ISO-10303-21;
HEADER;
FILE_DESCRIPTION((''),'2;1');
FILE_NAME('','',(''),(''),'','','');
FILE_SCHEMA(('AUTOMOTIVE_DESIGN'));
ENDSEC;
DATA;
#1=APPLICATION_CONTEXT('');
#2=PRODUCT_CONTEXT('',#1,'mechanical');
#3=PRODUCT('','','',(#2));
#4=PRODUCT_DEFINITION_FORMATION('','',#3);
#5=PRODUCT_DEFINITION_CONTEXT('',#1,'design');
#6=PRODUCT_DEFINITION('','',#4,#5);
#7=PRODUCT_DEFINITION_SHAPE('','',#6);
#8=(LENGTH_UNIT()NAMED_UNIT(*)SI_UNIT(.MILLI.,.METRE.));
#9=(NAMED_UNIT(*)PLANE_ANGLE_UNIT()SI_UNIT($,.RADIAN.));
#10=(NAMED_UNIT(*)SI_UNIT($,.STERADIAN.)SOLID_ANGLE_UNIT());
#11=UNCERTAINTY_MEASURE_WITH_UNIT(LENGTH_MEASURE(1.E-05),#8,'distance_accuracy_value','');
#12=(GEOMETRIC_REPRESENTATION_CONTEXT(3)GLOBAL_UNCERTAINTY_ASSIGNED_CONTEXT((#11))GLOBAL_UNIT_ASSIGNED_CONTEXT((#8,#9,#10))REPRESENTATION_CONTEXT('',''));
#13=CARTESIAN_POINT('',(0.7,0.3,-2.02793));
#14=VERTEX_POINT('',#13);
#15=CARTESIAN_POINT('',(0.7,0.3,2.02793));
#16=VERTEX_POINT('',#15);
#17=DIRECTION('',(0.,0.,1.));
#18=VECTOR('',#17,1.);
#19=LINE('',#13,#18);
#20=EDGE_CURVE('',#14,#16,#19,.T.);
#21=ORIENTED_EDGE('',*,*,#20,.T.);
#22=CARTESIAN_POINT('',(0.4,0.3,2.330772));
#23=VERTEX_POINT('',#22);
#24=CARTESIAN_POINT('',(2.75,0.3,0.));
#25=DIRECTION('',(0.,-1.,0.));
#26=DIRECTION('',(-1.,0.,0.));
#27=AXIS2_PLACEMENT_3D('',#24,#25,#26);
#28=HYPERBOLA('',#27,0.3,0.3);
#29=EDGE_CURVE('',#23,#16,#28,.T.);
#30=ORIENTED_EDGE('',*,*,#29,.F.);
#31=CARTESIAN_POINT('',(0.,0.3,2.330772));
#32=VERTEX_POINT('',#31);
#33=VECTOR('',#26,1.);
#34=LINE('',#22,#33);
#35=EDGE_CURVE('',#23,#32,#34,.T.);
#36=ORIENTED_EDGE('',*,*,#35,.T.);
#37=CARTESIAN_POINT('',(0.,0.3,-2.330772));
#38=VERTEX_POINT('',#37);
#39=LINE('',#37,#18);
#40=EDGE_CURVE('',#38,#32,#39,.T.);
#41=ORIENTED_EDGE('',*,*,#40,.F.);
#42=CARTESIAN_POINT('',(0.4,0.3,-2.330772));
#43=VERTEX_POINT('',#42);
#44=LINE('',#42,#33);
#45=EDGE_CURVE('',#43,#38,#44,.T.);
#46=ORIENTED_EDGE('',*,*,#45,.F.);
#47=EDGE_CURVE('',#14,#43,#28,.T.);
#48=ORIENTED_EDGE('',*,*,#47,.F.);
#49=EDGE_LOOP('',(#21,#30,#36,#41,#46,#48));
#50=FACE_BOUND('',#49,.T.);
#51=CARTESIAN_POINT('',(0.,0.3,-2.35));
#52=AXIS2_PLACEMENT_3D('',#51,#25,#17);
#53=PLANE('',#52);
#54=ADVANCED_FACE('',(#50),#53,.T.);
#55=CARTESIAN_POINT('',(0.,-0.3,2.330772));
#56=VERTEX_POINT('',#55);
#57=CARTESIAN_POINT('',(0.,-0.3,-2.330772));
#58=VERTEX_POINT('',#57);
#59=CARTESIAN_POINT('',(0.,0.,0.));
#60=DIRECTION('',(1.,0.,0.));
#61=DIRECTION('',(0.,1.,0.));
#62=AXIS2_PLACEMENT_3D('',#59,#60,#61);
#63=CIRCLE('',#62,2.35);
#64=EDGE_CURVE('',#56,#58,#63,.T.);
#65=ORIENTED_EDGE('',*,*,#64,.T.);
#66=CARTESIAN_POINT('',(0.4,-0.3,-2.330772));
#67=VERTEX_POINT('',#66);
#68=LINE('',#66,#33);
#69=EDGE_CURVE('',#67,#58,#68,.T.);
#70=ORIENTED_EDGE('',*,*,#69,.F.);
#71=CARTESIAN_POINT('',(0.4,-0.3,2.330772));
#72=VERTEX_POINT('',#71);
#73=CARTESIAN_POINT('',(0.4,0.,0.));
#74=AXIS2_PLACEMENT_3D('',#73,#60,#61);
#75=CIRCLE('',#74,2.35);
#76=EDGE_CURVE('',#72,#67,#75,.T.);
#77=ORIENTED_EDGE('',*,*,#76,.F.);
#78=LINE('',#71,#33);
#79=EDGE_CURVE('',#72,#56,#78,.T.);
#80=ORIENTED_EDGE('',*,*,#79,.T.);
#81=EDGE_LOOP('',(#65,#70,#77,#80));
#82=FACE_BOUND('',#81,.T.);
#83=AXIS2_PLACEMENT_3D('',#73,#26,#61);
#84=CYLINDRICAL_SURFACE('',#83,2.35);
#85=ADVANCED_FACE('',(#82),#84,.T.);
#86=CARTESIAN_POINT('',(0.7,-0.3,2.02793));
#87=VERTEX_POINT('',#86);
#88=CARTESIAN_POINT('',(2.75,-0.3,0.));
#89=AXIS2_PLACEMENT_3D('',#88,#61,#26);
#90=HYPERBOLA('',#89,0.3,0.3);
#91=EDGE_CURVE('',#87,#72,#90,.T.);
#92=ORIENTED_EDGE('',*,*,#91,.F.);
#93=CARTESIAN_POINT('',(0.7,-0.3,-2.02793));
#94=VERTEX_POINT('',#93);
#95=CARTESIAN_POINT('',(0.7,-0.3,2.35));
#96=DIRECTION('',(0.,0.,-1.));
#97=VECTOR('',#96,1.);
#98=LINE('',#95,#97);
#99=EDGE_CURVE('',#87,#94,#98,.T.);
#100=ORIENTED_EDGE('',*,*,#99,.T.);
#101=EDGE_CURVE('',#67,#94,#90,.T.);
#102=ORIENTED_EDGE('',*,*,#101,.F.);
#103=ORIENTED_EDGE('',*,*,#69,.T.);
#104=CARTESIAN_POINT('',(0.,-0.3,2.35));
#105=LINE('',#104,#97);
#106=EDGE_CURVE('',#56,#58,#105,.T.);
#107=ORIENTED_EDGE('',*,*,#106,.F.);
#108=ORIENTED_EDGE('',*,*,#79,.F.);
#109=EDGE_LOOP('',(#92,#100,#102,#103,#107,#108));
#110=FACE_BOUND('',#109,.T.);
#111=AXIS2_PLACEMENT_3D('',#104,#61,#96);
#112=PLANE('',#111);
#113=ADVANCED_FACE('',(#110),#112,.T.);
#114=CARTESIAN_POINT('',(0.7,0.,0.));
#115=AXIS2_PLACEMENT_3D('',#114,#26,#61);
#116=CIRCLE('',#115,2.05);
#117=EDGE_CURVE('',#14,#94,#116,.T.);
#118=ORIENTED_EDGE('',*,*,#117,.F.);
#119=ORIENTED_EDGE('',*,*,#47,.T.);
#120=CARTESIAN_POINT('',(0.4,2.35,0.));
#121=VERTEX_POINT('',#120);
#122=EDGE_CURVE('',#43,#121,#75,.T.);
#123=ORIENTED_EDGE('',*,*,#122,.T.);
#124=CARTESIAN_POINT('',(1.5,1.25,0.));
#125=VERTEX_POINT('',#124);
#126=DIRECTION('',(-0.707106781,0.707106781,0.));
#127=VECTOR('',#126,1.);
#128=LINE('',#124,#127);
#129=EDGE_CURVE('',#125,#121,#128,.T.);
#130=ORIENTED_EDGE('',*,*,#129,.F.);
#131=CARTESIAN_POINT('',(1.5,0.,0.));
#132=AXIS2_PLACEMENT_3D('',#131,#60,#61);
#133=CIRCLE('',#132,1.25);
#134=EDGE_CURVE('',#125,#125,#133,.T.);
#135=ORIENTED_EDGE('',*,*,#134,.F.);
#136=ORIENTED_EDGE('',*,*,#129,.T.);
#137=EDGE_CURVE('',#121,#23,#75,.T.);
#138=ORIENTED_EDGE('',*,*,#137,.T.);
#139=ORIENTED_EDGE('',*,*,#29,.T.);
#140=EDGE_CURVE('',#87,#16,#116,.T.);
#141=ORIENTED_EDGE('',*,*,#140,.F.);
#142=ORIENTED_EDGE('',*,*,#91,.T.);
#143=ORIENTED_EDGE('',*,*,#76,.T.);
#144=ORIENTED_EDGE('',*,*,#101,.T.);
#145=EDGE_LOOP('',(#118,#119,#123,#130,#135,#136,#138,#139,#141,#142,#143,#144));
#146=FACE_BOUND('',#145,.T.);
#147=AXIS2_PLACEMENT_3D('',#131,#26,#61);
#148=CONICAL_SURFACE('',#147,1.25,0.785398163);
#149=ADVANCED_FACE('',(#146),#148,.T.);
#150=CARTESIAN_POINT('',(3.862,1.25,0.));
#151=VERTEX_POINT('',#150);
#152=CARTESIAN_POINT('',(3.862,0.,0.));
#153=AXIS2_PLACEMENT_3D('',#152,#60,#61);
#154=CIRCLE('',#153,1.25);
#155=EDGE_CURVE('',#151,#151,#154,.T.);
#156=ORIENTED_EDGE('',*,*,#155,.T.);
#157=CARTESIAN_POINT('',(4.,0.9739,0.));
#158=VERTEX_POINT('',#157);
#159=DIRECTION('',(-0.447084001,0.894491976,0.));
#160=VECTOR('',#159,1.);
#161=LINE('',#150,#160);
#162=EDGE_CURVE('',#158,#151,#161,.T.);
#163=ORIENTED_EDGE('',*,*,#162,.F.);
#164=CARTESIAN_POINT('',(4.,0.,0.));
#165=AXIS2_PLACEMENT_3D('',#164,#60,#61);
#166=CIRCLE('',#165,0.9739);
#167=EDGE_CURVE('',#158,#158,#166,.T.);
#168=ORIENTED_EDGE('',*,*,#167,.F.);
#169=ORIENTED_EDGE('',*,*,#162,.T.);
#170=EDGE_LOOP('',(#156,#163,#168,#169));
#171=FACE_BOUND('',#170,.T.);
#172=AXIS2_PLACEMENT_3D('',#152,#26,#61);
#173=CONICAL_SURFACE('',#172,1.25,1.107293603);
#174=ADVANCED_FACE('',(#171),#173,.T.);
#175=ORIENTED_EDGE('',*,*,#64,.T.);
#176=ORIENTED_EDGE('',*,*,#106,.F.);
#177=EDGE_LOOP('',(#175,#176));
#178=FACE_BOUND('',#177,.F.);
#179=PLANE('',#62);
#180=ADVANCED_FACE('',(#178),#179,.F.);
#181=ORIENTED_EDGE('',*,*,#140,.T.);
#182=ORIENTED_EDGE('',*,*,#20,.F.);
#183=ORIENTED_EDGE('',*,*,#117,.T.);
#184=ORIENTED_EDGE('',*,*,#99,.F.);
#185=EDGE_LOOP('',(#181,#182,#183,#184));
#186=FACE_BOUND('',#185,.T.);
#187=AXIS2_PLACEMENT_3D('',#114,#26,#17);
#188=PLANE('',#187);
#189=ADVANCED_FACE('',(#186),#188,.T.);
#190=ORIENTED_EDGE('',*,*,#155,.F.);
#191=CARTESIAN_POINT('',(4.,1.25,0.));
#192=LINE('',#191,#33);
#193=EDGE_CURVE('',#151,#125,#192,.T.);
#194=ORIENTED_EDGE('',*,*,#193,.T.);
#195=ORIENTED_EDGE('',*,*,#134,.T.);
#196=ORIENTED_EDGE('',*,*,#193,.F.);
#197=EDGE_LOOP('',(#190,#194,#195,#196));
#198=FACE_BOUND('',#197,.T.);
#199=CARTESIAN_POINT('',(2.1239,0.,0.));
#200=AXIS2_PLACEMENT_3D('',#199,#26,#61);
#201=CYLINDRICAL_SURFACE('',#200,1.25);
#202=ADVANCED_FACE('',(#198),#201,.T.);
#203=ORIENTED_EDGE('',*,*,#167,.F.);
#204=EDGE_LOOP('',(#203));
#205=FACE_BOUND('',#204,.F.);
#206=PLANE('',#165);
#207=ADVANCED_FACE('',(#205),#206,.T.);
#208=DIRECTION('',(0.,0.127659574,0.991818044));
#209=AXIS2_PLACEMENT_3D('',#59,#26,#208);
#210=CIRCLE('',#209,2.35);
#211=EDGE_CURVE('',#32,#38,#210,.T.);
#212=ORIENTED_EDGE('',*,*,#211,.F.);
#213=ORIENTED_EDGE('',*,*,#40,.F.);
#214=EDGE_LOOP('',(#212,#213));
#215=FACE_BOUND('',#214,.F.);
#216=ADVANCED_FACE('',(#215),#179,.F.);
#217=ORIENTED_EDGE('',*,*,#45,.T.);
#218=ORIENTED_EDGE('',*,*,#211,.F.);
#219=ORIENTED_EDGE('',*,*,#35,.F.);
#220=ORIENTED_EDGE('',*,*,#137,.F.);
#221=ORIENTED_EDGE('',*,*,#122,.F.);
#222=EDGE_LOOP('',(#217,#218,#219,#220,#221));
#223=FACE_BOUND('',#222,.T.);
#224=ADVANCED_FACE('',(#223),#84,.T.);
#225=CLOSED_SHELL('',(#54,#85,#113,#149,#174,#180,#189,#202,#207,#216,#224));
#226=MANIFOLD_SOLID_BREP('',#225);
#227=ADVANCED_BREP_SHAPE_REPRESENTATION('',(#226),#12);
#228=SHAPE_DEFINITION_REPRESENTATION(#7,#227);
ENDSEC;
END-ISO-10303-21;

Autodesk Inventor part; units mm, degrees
ref_plane "YZ Plane" through (0, 0, 0) normal (1, 0, 0) x (0, 1, 0)
ref_plane "XZ Plane" through (0, 0, 0) normal (0, 1, 0) x (-1, 0, 0)
sketch "Sketch1" plane through (0, 0, 0) normal (0, 0, 1) x (1, 0, 0)
  line L0 (0, 0) -> (4, 0)
  line L1 (4, 0) -> (4, 1.25)
  line L2 (4, 1.25) -> (2.4, 1.25)
  line L3 (2.4, 1.25) -> (2.1239, 1.25)
  line L4 (2.1239, 1.25) -> (1.5, 1.25)
  line L5 (1.5, 1.25) -> (0.4, 2.35)
  line L6 (0.4, 2.35) -> (0, 2.35)
  line L7 (0, 2.35) -> (0, 0)
  line L8 (2.4, 1.25) -> (1.5, 1.25) construction
  line L9 (-0.8, 0) -> (4.8, 0) projected
  line L10 (0, 2.82) -> (0, -0.47) projected
  dimension "d0" = 4
  dimension "d1" = 45
  dimension "d2" = 0.2761
  dimension "d3" = 1.6
  dimension "d4" = 1.5
  dimension "d5" = 2.5
  dimension "d6" = 2.5
  dimension "d7" = 4.7
revolve "Body" add sketch "Sketch1" angle 360 about axis through (0, 0, 0) along (1, 0, 0)
sketch "Sketch2" plane through (0, 0, 0) normal (-1, 0, 0) x (0, 0, 1)
  line L0 (2.35, -0.3) -> (-2.35, -0.3)
  line L1 (-2.35, -0.3) -> (-2.35, 0.3)
  line L2 (-2.35, 0.3) -> (2.35, 0.3)
  line L3 (2.35, 0.3) -> (2.35, -0.3)
  line L4 (0, 0.3) -> (0, -0.3) construction
  line L5 (-2.35, 0) -> (2.35, 0) construction
  line L6 (0, 2.35) -> (0, 0) projected
  dimension "d15" = 0.6
  dimension "d16" = 4.7
extrude "Slot" cut sketch "Sketch2" against normal blind 0.7
thread "Thread" size "M2.5x0.45" class "6g" standard "ISO Metric profile" length 1.6
chamfer "Chamfer1" distance 0.2761 distance2 0.138 1 edges at (4, -1.25, 0) measured on face at (4, -0.3689, 0.1936)
ref_plane "Work Plane1" through (33.575, 0, 0) normal (0, 0, -1) x (1, 0, 0)
equation "\"d0\" = NLG"
equation "\"d1\" = 0.5 * SEWI"
equation "\"d2\" = GAL"
equation "\"d3\" = GEL"
equation "\"d4\" = KOH"
equation "\"d5\" = BDM"
equation "\"d6\" = GD"
equation "\"d7\" = KOD"
equation "\"d15\" = SBR"
equation "\"d16\" = KOD"
equation "\"d8\" = STI"
equation "\"d10\" = GEL"
equation "\"d12\" = -0.5 * SPD + 0.5 * GD"
equation "\"d13\" = 0.5 * GAL"
equation "\"NLG\" = 4"
equation "\"GAL\" = 0.61345 * PTC"
equation "\"GEL\" = 1.6"
equation "\"KOH\" = 1.5"
equation "\"KOD\" = 4.7"
equation "\"SEWI\" = 90deg"
equation "\"BDM\" = NND"
equation "\"GD\" = NND"
equation "\"SBR\" = 0.6"
equation "\"STI\" = 0.7"
equation "\"SPD\" = NND - 1.2269 * PTC"
equation "\"GUL\" = 0.61345 * PTC"
equation "\"PTC\" = 0.45"
equation "\"EPV\" = 2.75"
equation "\"THREADDIA\" = 2.5"
equation "\"TOA\" = 30deg"
equation "\"NND\" = 2.5"
equation "\"GD1\" = THREADDIA - 1.2269 * PTC"
properties part number "DIN 963 - M2.5 x 4" material "Steel, Mild"
